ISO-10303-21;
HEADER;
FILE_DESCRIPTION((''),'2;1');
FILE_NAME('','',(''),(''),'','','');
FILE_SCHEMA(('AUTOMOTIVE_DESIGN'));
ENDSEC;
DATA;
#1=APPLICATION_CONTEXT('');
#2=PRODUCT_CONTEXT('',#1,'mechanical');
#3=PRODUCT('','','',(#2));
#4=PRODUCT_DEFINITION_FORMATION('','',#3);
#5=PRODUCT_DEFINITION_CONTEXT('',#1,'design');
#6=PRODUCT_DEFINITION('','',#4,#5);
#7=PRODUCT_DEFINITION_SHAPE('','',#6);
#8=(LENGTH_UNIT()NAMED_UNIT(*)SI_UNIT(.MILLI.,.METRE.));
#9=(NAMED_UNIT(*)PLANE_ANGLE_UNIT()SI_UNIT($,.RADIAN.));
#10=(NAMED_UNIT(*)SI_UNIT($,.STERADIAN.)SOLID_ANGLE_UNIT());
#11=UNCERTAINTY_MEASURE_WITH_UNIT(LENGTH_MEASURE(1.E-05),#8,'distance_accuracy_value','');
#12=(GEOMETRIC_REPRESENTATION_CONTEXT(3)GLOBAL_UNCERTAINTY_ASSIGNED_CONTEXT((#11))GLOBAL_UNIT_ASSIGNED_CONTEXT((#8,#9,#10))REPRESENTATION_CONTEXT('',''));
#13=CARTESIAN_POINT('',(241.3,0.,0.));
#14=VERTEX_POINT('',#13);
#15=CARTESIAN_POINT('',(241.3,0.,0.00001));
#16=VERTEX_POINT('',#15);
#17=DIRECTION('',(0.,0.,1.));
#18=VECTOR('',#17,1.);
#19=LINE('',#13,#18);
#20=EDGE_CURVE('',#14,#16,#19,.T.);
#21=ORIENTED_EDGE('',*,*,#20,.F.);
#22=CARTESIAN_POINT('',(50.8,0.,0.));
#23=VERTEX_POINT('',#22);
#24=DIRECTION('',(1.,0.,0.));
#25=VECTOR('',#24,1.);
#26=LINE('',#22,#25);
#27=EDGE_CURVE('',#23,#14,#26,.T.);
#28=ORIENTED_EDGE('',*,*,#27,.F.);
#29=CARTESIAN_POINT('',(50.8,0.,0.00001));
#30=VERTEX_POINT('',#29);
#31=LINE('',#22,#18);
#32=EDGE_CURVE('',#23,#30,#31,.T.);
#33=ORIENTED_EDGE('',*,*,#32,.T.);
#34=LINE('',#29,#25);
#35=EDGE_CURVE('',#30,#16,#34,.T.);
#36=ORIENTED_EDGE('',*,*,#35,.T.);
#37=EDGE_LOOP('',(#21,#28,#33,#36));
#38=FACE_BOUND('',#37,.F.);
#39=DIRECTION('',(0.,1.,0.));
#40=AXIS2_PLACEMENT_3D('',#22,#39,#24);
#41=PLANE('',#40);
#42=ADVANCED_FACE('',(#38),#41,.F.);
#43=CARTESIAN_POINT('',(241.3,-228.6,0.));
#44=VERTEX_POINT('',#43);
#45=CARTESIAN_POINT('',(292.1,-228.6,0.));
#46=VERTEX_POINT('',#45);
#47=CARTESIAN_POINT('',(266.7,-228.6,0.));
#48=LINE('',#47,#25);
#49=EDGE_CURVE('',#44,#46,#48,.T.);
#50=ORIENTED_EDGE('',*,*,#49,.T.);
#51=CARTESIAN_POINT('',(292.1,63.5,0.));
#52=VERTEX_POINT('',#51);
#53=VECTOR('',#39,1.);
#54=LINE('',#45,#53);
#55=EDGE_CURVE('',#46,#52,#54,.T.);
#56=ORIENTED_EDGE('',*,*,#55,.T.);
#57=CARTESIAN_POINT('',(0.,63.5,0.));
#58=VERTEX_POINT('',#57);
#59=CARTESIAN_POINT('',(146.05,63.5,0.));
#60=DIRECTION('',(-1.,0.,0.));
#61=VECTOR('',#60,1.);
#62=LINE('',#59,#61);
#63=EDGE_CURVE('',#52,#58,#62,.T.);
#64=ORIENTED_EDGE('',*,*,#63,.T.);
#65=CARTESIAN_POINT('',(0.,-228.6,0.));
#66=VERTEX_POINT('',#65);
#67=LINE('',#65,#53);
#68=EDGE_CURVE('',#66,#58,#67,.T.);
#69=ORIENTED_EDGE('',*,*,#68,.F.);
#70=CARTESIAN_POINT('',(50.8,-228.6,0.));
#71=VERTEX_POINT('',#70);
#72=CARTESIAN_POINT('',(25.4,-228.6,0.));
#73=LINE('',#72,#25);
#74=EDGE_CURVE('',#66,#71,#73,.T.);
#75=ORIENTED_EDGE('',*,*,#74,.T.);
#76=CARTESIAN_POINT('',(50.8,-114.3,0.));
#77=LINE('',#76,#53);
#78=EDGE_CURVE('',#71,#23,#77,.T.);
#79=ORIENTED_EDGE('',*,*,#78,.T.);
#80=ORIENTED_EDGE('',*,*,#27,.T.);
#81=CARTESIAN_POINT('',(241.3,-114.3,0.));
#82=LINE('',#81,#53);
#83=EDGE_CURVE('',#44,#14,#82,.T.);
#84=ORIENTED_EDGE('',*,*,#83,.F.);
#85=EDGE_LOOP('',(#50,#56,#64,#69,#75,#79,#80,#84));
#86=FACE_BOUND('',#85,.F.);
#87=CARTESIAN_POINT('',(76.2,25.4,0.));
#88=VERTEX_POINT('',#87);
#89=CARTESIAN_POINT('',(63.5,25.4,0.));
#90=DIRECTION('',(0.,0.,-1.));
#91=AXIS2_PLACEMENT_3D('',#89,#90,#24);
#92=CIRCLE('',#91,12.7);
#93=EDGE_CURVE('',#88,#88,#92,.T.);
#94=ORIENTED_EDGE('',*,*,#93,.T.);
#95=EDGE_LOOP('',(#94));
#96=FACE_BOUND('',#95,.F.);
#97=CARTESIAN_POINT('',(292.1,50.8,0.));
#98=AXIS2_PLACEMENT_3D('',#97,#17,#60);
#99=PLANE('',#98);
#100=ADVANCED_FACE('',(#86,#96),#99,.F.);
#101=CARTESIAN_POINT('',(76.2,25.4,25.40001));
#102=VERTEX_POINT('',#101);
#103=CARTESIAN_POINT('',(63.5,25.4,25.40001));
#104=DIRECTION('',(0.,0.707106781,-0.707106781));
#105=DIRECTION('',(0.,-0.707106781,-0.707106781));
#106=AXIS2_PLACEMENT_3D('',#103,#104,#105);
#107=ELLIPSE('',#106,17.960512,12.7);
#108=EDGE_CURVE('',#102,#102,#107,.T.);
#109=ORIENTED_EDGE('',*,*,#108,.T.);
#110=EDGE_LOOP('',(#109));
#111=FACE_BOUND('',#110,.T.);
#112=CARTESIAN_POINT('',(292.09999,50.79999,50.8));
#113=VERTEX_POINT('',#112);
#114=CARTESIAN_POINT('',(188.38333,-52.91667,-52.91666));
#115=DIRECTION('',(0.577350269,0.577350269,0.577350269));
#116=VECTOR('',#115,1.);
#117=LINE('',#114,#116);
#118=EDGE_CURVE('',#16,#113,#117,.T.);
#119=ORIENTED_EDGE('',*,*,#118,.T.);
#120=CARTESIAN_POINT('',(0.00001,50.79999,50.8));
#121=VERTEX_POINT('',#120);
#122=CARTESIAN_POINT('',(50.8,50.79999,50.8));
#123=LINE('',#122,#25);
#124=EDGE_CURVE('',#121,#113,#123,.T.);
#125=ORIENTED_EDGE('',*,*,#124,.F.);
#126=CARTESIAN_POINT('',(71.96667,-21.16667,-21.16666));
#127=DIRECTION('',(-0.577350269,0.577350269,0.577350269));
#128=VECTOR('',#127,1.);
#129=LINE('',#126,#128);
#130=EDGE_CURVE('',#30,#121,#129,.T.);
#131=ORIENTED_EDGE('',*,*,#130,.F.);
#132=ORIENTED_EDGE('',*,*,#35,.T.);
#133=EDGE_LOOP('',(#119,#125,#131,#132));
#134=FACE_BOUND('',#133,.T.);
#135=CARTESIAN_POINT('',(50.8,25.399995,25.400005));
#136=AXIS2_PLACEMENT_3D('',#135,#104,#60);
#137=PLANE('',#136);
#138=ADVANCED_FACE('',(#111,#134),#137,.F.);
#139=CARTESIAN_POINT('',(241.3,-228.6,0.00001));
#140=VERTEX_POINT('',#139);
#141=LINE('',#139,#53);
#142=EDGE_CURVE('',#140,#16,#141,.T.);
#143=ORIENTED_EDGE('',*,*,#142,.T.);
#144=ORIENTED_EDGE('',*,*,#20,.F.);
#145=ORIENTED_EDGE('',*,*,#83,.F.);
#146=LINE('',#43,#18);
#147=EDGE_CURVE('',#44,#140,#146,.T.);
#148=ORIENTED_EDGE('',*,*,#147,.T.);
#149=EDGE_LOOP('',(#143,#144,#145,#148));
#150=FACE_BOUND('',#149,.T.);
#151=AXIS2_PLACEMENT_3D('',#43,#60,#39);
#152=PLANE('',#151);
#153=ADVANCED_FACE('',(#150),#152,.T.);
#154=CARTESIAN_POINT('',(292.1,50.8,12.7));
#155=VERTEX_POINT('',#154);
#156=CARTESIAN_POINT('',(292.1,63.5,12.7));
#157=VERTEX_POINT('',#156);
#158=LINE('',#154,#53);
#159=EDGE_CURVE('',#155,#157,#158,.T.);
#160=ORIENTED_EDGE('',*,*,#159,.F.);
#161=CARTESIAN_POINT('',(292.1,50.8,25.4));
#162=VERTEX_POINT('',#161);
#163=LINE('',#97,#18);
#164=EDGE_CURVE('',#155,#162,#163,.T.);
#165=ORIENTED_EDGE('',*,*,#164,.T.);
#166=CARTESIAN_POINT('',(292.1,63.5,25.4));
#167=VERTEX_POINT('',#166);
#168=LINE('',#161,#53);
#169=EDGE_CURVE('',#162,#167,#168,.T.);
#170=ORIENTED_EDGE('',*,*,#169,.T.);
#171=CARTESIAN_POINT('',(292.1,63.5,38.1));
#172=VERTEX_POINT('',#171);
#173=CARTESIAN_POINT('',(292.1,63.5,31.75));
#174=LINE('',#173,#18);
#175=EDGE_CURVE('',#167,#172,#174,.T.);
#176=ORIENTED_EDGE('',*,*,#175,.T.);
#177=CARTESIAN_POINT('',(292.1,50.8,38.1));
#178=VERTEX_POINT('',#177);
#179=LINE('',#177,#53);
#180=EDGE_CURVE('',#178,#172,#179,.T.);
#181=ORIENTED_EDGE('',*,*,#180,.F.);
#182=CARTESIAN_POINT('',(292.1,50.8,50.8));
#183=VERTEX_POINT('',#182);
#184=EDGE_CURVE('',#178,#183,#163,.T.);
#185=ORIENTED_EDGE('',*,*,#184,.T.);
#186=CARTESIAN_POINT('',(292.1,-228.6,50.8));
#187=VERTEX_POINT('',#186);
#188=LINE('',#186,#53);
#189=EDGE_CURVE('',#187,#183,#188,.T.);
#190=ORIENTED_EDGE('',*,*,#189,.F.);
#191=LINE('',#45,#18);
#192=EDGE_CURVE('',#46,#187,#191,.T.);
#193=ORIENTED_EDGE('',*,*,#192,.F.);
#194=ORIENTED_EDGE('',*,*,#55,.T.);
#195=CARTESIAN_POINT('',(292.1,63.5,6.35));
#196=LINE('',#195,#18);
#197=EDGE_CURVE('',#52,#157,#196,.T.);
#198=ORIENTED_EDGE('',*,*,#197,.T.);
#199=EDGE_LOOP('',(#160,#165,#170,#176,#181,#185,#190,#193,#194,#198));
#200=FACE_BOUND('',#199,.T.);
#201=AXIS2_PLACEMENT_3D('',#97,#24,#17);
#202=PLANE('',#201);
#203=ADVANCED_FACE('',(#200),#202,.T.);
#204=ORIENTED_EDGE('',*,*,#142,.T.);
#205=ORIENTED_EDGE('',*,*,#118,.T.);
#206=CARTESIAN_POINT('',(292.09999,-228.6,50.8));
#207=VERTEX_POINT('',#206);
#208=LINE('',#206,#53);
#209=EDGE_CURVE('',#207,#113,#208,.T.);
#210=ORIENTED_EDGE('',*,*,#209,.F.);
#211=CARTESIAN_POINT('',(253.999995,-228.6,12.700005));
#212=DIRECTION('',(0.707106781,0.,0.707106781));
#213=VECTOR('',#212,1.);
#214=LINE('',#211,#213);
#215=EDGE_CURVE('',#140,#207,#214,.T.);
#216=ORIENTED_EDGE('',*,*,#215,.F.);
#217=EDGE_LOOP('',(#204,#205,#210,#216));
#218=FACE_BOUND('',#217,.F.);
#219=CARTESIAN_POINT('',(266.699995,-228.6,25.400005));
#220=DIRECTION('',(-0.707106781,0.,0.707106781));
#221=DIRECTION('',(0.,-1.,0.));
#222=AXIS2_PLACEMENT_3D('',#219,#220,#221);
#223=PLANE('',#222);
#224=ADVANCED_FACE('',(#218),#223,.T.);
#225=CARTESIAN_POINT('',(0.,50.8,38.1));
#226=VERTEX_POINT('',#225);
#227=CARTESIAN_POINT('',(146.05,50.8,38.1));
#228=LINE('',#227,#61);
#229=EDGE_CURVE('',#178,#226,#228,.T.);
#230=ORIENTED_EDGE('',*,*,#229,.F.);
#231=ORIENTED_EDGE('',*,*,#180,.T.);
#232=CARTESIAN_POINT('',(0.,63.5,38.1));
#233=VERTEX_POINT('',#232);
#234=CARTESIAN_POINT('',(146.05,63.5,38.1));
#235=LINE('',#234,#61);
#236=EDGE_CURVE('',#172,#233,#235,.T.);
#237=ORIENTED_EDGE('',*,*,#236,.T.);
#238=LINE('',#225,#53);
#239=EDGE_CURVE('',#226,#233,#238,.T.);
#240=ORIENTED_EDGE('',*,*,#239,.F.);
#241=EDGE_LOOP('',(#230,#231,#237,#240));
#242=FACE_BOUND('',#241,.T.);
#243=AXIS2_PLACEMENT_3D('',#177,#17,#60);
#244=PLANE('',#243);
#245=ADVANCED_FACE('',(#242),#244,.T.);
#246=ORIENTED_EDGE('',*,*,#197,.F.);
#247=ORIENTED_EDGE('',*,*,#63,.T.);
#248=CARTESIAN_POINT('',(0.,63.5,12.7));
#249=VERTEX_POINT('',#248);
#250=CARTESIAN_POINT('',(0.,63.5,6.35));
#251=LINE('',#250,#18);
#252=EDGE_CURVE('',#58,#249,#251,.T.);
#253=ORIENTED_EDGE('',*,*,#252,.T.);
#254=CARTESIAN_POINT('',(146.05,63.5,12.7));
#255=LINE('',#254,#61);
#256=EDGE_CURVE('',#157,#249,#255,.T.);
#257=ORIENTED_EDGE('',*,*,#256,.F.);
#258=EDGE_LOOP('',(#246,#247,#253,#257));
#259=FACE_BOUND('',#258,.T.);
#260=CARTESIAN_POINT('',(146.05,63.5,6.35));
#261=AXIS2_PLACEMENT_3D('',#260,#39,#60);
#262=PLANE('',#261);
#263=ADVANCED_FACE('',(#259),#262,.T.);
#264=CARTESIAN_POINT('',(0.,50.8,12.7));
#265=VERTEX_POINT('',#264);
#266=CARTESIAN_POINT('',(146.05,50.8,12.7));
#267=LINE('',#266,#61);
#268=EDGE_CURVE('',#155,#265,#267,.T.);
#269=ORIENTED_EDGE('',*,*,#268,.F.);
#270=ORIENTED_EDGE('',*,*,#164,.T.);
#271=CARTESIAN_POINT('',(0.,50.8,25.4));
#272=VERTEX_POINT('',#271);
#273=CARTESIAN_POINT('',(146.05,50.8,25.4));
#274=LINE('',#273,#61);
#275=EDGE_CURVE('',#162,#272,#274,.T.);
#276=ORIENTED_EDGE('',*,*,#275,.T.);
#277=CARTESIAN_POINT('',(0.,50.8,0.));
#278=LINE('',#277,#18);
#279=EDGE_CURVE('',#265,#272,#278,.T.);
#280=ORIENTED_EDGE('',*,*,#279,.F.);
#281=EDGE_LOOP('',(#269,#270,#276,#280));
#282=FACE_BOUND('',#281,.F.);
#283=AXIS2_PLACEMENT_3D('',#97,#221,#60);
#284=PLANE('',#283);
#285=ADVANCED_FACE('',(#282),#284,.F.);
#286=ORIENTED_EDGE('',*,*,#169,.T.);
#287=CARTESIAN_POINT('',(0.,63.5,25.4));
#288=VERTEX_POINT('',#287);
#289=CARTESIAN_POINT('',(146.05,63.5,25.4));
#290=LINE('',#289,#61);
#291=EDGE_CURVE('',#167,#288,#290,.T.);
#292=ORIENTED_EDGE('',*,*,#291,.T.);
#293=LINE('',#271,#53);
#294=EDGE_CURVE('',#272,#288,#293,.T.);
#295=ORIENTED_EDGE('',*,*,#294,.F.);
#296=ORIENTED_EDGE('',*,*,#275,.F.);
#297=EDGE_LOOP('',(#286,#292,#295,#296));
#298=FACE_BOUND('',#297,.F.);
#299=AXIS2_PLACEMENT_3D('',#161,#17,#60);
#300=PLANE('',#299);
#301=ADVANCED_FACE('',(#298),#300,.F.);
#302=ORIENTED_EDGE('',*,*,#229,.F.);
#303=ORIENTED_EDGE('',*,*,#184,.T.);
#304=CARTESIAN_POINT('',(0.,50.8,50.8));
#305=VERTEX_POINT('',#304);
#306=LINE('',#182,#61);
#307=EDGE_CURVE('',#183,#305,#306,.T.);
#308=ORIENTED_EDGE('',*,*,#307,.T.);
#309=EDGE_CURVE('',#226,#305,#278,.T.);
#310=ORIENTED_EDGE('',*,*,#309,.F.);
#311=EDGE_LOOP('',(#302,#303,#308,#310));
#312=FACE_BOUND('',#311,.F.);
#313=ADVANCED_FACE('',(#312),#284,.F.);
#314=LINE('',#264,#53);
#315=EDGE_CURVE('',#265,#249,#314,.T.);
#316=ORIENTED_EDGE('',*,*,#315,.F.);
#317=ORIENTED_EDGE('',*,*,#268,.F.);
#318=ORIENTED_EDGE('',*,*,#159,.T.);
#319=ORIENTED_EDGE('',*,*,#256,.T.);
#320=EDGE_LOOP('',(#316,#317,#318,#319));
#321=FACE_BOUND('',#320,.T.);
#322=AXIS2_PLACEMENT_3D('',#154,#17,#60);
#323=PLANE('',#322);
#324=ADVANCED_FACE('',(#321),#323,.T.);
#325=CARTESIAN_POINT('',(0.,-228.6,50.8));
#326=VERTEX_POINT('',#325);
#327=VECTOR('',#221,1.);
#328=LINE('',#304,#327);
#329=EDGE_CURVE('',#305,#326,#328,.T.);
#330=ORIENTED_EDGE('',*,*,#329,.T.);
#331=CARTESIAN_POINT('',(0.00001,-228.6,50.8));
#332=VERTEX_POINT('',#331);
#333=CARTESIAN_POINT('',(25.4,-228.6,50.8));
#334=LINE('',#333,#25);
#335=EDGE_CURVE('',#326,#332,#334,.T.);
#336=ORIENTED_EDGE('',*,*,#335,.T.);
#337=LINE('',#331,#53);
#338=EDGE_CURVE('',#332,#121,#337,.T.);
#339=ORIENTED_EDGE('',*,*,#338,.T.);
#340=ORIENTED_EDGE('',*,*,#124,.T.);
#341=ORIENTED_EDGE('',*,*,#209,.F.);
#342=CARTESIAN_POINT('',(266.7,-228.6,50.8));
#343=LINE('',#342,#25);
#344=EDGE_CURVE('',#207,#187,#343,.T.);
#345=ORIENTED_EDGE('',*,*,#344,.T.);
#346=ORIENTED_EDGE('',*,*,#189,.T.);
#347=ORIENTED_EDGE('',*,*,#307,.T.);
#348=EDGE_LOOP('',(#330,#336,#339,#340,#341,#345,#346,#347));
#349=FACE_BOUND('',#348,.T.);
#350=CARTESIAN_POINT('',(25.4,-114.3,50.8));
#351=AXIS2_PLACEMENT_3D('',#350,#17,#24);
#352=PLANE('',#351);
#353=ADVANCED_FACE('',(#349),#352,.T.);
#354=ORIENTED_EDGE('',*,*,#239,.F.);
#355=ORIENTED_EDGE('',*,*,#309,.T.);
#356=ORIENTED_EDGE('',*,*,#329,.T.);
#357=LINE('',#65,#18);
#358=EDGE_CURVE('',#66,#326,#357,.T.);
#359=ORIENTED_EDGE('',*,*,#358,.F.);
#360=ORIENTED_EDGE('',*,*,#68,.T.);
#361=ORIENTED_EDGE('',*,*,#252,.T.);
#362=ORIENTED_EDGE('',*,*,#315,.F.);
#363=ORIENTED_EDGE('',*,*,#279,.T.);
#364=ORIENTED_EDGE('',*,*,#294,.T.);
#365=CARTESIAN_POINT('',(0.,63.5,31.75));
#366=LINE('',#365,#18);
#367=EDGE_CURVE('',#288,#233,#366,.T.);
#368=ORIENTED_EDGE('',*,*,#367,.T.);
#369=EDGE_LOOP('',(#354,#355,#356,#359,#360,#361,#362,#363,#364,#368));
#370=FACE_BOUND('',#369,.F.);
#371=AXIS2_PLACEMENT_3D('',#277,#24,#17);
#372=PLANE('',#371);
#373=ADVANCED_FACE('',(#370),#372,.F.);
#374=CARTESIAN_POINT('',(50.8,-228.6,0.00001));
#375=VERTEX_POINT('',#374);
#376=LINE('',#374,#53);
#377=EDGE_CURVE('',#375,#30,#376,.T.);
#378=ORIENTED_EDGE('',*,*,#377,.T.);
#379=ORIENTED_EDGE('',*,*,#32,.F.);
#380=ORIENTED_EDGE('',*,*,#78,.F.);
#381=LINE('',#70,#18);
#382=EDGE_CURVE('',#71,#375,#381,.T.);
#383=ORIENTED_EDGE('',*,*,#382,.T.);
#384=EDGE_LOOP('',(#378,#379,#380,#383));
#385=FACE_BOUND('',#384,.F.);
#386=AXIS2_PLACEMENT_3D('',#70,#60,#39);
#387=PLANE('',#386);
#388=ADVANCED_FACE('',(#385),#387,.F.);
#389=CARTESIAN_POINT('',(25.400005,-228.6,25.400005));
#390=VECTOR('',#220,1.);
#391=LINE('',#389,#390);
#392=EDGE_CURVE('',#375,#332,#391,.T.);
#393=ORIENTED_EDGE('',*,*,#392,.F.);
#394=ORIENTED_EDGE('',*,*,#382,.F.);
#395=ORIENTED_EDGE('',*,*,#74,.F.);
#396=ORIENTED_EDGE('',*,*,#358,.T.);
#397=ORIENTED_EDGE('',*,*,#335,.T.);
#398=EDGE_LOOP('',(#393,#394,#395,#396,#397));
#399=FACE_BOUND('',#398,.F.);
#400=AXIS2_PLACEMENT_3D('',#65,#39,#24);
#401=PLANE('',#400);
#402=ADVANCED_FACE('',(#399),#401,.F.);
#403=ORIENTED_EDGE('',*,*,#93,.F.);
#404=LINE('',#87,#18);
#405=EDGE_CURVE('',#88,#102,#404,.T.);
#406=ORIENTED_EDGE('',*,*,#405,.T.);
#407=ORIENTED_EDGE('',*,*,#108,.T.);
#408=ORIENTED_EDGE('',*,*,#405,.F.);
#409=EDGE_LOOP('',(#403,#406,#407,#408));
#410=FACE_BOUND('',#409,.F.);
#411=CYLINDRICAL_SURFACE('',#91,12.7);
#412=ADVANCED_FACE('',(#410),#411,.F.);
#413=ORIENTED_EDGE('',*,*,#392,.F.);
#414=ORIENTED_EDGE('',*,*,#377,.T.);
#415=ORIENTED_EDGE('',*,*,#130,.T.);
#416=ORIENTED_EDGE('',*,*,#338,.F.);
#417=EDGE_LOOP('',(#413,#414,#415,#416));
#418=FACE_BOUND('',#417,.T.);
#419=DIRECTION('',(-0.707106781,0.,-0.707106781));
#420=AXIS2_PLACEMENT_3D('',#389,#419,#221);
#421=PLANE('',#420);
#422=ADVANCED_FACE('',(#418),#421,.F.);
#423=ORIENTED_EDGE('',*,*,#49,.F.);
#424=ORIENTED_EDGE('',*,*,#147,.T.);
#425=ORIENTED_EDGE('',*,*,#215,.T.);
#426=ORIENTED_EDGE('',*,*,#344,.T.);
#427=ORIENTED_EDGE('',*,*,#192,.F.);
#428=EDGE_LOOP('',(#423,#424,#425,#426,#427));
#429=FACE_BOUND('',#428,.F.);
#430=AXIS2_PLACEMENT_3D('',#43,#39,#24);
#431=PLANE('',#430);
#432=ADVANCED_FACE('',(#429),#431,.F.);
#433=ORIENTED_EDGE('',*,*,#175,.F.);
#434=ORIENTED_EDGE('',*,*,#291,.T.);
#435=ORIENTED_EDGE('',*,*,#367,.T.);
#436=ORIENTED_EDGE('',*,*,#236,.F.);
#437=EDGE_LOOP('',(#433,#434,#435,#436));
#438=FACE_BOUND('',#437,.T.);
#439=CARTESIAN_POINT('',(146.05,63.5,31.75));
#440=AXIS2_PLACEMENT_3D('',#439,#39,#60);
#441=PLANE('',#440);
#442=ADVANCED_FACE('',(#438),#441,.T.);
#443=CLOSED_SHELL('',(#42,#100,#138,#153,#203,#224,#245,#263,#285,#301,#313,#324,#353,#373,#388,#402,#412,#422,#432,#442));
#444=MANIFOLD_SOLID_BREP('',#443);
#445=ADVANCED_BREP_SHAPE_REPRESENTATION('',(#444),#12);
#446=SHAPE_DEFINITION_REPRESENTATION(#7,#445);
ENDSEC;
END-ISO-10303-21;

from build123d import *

# Parameters (mm, degrees)
F0_W     = 50.8
F0_H     = 228.6
F1_DEPTH = 50.8
F2_SIZE  = 50.79999
F4_R     = 12.7
F5_DEPTH = 63.5
F3_W     = 292.1
F3_H     = 12.7
F6_DEPTH = 12.7


# Not quite as in the source:
# - a fillet or chamfer is up to 0.001 mm smaller than in the source, because OpenCascade refuses the exact size


with BuildPart() as f1:
    # F0 (on Top) → F1 (new body)
    with BuildSketch(Plane.XY):
        with Locations((25.4, -114.3)):
            Rectangle(F0_W, F0_H)
        Polygon((0, 50.8), (0, 0), (50.8, 0), (241.3, 0), (292.1, 0), (292.1, 50.8), align=None)
        with Locations((266.7, -114.3)):
            Rectangle(F0_W, F0_H)
    extrude(amount=F1_DEPTH)

    # F2 (size 50.8 in the source; OpenCascade refuses exactly that, so slightly less here)
    f2_edges = [f1.edges().sort_by_distance(p)[0] for p in [
        (50.8, -114.3, 50.8),
        (146.05, 0, 50.8),
        (241.3, -114.3, 50.8),
    ]]
    chamfer(f2_edges, length=F2_SIZE)

    # F4 (on face) → F5 (cut)
    with BuildSketch(Plane(origin=(0, 0, 0), x_dir=(1, 0, 0), z_dir=(0, 0, -1))):
        with Locations((63.5, -25.4)):
            Circle(F4_R)
    extrude(amount=-F5_DEPTH, mode=Mode.SUBTRACT)

    # F3 (on face) → F6 (join)
    with BuildSketch(Plane(origin=(0, 50.8, 0), x_dir=(-1, 0, 0), z_dir=(0, 1, 0))):
        with Locations((-146.05, 6.35)):
            Rectangle(F3_W, F3_H)
        with Locations((-146.05, 31.75)):
            Rectangle(F3_W, F3_H)
    extrude(amount=F6_DEPTH)


solid = f1.part
